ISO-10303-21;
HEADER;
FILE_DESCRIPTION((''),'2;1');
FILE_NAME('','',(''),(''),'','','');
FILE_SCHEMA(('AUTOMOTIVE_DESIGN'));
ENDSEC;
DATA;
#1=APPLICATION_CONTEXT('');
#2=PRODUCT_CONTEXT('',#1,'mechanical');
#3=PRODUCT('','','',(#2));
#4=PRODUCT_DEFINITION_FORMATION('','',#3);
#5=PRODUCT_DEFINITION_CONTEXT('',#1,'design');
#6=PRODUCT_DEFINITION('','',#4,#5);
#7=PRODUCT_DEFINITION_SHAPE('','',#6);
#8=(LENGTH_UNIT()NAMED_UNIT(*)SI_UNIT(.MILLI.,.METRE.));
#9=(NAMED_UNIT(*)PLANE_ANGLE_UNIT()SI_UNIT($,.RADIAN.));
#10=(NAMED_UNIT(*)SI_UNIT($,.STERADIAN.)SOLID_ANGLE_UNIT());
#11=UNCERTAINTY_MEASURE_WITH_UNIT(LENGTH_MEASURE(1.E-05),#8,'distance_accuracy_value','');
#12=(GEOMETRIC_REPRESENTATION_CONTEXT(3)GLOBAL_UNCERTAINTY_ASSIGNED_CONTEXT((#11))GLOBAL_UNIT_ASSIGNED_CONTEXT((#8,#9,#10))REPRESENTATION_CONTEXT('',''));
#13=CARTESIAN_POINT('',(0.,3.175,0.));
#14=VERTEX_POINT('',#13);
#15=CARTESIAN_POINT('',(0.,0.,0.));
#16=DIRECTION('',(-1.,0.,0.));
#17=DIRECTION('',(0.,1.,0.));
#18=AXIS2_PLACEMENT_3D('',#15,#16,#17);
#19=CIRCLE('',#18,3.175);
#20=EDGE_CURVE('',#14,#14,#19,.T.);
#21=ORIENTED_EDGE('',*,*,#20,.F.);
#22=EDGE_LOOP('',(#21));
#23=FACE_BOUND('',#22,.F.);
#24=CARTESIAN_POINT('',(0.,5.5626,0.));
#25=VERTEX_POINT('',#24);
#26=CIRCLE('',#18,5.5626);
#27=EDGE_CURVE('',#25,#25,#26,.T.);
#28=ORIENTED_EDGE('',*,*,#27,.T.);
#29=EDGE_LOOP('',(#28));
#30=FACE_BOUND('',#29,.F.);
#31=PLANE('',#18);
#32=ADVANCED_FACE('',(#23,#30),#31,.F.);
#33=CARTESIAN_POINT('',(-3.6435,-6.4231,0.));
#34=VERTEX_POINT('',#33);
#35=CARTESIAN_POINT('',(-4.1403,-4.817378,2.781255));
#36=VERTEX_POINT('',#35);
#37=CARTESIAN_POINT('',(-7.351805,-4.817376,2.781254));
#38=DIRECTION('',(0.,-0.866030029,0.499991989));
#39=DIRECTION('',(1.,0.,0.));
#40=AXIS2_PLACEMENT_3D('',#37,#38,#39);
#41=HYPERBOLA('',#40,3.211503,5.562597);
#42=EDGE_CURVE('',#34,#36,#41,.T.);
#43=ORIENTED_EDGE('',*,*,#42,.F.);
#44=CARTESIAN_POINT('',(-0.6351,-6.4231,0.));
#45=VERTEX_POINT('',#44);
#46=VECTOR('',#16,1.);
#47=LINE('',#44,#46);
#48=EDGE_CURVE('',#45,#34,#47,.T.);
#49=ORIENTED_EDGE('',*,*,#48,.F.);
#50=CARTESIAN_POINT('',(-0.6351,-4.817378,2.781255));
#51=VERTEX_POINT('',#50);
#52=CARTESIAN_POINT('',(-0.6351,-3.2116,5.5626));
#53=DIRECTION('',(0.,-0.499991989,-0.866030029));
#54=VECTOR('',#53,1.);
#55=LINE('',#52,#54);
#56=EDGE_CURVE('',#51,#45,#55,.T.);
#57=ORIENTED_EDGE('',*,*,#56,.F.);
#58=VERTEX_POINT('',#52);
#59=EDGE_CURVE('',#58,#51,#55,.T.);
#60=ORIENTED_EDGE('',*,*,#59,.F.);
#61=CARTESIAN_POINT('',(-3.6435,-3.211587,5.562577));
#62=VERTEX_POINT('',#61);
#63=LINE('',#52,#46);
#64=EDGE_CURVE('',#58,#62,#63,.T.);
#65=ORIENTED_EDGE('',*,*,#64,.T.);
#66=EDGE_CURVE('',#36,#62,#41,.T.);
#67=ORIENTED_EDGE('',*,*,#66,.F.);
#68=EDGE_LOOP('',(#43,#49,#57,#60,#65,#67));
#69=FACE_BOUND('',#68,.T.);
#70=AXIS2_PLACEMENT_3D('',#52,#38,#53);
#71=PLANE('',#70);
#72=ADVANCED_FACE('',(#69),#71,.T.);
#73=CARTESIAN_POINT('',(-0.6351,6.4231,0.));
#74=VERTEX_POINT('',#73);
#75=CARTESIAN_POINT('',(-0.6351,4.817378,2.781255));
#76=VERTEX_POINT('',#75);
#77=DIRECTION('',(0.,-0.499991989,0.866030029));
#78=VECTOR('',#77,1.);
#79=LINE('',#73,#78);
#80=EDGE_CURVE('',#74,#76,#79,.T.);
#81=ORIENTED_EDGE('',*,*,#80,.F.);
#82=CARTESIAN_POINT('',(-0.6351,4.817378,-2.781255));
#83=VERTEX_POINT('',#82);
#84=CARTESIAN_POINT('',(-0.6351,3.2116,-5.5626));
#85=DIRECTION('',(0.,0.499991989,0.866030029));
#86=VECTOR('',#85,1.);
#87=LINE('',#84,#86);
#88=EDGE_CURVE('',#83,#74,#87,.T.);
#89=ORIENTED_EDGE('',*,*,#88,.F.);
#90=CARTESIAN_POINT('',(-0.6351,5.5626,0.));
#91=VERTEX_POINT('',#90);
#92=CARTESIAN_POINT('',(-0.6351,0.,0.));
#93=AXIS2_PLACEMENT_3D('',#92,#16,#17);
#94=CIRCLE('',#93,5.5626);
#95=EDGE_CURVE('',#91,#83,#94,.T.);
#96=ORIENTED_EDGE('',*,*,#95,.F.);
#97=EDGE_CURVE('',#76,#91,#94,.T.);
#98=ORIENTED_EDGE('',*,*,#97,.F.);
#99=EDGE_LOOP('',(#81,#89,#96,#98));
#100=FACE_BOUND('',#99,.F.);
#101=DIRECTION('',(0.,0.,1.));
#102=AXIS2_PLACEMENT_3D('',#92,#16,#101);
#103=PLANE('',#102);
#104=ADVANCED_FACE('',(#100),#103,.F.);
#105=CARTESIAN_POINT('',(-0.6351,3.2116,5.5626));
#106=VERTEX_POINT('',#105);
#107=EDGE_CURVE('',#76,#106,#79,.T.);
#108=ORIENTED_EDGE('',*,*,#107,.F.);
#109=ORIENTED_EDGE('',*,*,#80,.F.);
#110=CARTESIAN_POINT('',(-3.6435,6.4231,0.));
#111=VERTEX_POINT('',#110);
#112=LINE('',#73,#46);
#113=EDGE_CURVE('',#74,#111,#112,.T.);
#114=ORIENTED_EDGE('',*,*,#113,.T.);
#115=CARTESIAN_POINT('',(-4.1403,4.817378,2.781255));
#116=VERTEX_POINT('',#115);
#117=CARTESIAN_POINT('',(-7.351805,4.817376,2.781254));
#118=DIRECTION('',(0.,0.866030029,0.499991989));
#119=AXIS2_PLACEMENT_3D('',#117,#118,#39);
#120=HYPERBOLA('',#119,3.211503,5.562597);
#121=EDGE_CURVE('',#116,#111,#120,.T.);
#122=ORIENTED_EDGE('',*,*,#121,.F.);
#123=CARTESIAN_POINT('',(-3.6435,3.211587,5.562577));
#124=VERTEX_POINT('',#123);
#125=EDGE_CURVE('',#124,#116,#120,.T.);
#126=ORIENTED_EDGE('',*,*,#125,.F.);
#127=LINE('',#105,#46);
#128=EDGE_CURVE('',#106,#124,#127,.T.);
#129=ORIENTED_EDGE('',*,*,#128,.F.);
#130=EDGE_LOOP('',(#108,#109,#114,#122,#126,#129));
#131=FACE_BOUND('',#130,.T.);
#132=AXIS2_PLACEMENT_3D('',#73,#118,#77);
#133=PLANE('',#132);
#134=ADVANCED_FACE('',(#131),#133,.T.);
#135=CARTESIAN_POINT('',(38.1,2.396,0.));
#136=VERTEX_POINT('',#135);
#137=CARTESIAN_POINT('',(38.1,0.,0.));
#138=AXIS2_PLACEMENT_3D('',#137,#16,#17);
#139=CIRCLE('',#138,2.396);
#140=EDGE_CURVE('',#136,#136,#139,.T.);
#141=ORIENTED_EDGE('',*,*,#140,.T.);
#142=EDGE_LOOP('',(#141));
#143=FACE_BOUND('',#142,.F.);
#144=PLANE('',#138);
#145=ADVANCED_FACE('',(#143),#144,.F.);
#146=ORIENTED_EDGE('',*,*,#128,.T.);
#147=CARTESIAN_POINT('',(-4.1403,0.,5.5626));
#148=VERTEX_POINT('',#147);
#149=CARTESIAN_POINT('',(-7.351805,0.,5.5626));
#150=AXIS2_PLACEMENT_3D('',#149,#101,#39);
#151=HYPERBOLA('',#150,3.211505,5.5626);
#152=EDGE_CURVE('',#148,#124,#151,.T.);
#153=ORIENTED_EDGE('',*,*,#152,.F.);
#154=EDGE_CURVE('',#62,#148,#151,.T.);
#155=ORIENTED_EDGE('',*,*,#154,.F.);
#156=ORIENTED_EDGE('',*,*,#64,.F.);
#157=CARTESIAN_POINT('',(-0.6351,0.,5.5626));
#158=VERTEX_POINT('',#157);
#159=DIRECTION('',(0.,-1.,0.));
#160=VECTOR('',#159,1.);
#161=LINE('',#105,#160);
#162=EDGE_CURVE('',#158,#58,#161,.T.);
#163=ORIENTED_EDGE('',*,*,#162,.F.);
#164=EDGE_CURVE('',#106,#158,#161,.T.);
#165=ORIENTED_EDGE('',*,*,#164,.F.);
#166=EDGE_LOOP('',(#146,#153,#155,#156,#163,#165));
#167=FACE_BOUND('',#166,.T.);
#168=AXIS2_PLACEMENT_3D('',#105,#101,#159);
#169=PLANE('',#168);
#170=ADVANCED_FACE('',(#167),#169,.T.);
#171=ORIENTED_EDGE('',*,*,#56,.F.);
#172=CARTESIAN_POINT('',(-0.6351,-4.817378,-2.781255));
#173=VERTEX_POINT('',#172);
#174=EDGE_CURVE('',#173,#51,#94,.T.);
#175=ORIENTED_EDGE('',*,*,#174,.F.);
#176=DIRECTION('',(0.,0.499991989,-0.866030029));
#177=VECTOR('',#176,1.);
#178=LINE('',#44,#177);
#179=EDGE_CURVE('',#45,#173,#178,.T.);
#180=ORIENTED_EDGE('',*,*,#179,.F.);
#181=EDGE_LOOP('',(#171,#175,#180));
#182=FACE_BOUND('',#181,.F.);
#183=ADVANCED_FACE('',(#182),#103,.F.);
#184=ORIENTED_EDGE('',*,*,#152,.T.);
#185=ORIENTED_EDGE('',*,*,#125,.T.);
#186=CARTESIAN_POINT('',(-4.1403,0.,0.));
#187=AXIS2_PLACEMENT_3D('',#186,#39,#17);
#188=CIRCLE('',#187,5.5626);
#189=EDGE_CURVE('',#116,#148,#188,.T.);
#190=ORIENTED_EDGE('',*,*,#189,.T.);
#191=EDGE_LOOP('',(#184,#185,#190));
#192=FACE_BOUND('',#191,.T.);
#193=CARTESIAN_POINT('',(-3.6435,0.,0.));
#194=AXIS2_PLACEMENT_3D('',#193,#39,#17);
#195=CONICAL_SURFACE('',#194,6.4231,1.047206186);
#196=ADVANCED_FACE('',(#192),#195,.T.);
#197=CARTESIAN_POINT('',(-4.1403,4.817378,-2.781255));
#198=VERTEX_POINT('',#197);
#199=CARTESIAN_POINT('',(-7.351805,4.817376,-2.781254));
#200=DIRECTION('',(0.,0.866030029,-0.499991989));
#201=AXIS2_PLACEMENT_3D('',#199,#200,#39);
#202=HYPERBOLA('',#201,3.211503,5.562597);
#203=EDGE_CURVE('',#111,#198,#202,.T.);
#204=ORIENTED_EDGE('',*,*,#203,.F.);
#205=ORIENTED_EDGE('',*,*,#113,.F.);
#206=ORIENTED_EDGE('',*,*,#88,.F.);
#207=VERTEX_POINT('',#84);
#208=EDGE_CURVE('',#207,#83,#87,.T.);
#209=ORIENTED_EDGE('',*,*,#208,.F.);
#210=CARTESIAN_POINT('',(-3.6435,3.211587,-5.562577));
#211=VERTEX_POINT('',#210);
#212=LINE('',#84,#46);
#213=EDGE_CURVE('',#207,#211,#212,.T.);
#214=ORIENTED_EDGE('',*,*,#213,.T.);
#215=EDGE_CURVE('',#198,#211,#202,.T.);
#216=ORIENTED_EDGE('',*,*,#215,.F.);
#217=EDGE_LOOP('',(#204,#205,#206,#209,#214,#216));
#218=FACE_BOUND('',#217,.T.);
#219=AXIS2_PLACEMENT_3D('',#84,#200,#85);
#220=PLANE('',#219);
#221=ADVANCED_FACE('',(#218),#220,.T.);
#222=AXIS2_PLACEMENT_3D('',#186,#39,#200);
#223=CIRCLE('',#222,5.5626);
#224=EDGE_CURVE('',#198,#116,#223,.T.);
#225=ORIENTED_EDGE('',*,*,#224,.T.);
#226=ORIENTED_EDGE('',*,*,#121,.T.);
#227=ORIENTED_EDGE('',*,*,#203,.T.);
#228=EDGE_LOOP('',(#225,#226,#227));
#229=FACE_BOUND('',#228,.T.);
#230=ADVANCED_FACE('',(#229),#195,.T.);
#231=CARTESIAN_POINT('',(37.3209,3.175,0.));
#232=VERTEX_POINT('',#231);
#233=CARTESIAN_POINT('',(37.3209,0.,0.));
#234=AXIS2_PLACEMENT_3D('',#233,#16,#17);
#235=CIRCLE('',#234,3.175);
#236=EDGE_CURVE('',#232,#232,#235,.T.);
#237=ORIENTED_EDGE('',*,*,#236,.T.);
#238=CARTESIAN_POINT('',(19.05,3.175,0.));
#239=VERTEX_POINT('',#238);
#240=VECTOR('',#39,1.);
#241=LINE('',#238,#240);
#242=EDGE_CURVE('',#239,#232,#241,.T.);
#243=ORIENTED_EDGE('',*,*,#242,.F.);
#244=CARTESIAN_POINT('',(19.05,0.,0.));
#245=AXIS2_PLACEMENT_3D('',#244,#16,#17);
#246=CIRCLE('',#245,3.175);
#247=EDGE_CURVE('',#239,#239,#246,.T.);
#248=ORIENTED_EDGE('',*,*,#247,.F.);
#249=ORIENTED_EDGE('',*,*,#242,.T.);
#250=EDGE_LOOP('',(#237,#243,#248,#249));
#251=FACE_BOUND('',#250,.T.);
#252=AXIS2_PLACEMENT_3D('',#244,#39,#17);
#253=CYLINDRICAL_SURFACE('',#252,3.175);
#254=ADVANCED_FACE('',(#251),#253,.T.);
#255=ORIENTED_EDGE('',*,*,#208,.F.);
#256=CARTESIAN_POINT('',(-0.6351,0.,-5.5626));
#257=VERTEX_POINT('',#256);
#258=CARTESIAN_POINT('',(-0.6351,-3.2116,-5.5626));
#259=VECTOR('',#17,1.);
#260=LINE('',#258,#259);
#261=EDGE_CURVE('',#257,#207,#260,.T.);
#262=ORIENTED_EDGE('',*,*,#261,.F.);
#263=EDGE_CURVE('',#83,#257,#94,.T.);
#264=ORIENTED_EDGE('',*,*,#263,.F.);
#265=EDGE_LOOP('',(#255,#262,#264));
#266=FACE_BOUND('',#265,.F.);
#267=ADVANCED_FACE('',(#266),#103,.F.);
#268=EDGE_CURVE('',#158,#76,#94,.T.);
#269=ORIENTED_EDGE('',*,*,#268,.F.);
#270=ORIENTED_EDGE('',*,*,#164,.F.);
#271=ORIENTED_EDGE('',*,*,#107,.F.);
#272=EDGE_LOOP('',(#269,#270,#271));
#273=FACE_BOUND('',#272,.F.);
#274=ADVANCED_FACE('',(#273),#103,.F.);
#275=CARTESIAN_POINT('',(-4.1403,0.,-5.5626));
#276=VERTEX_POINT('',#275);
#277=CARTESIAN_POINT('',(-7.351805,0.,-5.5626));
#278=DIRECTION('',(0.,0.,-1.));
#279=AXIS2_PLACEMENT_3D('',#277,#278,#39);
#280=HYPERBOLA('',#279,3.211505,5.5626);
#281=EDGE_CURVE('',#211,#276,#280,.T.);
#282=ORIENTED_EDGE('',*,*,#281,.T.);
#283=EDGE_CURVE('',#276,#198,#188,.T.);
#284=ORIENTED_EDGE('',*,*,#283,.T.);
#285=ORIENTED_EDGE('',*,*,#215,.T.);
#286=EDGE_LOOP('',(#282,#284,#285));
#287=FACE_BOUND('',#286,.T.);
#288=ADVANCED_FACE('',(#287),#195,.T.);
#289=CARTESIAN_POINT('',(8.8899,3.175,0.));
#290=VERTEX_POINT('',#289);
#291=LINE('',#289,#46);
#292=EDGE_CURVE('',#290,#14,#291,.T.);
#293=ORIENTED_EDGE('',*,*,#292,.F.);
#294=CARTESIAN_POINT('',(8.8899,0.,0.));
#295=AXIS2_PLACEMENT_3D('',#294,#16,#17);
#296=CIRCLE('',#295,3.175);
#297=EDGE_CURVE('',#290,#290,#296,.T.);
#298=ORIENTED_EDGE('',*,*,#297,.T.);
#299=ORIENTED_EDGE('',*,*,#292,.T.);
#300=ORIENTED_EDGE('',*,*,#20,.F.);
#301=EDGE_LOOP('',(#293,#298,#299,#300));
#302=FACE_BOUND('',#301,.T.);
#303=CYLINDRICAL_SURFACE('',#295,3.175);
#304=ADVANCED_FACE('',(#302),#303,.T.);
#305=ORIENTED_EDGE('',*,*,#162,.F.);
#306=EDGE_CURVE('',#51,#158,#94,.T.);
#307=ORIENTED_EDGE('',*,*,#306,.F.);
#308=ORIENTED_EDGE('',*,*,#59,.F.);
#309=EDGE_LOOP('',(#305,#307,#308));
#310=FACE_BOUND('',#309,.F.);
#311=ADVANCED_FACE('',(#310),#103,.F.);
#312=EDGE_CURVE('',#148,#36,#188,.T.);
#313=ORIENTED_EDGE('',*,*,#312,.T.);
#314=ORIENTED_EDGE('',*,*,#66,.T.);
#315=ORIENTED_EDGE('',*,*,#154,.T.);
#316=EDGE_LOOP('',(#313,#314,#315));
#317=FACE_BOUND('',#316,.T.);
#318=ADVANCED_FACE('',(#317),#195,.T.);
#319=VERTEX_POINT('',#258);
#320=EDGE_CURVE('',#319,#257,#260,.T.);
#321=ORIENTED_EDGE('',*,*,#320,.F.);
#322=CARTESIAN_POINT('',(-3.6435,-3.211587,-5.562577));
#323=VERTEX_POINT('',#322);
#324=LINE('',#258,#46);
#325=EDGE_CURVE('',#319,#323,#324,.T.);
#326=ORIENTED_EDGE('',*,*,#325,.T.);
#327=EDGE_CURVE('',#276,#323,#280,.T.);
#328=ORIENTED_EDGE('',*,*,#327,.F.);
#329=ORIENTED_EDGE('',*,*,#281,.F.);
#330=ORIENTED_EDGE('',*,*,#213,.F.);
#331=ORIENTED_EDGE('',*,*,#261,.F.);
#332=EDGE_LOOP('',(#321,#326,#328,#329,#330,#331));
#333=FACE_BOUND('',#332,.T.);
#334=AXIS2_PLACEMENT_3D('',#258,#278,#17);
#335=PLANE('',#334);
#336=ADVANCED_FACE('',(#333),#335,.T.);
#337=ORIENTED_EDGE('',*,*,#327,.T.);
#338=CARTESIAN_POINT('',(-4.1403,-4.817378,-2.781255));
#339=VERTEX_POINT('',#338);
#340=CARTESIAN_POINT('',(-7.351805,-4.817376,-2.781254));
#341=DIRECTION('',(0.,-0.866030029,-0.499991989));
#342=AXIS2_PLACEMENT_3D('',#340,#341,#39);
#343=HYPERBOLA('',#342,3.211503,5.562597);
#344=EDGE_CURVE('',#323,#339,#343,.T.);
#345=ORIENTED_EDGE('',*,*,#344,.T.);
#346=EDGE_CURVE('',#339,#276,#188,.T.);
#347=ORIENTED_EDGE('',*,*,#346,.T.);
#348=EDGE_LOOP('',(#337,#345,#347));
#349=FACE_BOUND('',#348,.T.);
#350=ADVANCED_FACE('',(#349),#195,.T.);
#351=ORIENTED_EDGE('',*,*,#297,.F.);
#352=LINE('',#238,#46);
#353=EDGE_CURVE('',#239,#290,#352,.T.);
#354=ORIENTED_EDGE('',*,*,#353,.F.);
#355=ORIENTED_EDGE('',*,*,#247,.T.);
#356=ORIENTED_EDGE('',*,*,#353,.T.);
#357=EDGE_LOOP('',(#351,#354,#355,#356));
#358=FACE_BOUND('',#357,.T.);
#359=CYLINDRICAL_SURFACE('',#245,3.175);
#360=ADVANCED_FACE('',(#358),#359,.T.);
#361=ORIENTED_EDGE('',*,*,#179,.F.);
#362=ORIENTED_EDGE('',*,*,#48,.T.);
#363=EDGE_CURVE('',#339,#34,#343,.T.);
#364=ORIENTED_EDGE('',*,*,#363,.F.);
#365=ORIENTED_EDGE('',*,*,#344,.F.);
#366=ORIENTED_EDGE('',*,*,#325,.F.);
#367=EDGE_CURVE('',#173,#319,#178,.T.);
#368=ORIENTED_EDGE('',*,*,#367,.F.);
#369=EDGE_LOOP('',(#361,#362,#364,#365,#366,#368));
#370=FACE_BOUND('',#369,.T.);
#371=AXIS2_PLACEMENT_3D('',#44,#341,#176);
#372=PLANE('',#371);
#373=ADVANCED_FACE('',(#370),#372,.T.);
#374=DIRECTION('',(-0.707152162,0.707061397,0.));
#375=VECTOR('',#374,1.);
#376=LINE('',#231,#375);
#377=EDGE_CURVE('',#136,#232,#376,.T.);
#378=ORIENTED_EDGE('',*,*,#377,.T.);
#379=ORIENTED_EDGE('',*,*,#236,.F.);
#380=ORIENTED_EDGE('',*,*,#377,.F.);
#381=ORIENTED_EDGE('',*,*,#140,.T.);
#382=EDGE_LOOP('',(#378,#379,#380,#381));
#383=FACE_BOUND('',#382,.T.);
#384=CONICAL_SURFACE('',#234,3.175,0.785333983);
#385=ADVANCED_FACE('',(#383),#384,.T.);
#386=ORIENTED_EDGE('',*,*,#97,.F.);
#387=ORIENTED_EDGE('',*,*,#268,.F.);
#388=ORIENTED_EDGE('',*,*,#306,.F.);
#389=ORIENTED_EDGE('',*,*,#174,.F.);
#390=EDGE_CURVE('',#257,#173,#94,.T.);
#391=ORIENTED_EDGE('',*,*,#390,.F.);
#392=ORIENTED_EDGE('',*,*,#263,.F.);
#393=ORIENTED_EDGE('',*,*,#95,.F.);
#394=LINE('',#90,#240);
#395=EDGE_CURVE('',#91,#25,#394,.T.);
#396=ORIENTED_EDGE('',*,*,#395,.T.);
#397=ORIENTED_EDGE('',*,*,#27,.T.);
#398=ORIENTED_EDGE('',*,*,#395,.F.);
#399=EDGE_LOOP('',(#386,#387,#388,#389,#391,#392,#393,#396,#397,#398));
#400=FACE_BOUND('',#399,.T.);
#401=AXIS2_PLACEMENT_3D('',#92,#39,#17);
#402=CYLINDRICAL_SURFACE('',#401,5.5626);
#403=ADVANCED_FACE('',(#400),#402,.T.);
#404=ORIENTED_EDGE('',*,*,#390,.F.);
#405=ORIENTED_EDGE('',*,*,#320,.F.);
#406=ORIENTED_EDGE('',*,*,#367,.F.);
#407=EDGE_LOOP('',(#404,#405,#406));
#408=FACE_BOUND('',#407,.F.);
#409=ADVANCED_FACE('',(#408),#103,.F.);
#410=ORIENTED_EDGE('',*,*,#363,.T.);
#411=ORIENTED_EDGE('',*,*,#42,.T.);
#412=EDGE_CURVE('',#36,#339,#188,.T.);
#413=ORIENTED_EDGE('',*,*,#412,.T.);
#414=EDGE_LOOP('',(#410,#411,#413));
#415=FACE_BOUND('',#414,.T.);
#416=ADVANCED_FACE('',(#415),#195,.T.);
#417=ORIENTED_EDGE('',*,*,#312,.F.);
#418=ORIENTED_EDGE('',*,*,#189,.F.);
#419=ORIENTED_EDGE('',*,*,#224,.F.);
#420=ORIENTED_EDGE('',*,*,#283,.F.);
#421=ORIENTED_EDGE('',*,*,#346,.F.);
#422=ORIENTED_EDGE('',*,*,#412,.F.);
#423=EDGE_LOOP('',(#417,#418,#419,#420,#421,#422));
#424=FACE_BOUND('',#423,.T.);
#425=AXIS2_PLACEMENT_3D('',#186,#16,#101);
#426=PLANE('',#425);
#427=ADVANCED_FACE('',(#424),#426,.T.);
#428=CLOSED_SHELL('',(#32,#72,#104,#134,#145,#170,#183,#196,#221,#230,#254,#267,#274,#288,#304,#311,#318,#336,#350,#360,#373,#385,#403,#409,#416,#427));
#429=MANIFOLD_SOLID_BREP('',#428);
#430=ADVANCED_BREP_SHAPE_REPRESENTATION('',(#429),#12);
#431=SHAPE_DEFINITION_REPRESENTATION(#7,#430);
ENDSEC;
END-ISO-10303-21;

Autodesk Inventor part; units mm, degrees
ref_plane "YZ Plane" through (0, 0, 0) normal (1, 0, 0) x (0, 1, 0)
ref_plane "XZ Plane" through (0, 0, 0) normal (0, 1, 0) x (-1, 0, 0)
sketch "Sketch1" plane through (0, 0, 0) normal (0, 0, 1) x (1, 0, 0)
  line L0 (0, 5.5626) -> (0, 3.175)
  line L1 (19.05, 3.175) -> (38.1, 3.175)
  line L2 (38.1, 3.175) -> (38.1, 0)
  line L3 (38.1, 0) -> (-0.6351, 0)
  line L4 (-8.3821, 0) -> (45.847, 0) projected
  line L5 (-0.6351, 0) -> (-0.6351, 5.5626)
  line L6 (-0.6351, 5.5626) -> (0, 5.5626)
  line L7 (19.05, 3.175) -> (8.8899, 3.175)
  line L8 (8.8899, 3.175) -> (0, 3.175)
  line L9 (0, -1.1125) -> (0, 6.6751) projected
  dimension "d0" = 38.1
  dimension "d1" = 19.05
  dimension "d2" = 6.35
  dimension "d9" = 0.6351
  dimension "d10" = 11.1252
  dimension "d13" = 10.1601
  dimension "d14" = 6.35
revolve "Body" add sketch "Sketch1" angle 360 about axis through (38.1, 0, 0) along (-1, 0, 0)
sketch "Sketch2" plane through (-0.6351, 0, 0) normal (-1, 0, 0) x (0, 0, 1)
  line L0 (0, 6.4231) -> (5.5626, 3.2116)
  line L1 (5.5626, 3.2116) -> (5.5626, -3.2116)
  line L2 (5.5626, -3.2116) -> (0, -6.4231)
  line L3 (0, -6.4231) -> (-5.5626, -3.2116)
  line L4 (-5.5626, -3.2116) -> (-5.5626, 3.2116)
  line L5 (-5.5626, 3.2116) -> (0, 6.4231)
  point P0 (0, 0)
  point P1 (0, 0)
  dimension "d11" = 11.1252
extrude "Head" add sketch "Sketch2" along normal blind 3.5052
sketch "Sketch4" plane through (0, 0, 0) normal (0, 0, 1) x (1, 0, 0)
  line L0 (-4.1403, 5.5626) -> (-4.1403, 6.4231)
  line L1 (-4.1403, 6.4231) -> (-3.6435, 6.4231)
  line L2 (-3.6435, 6.4231) -> (-4.1403, 5.5626)
  line L3 (-4.8413, 0) -> (0.0659, 0) projected
  line L4 (-0.6351, 6.4231) -> (-4.1403, 6.4231) projected
  line L5 (-4.1403, 3.2116) -> (-4.1403, 6.4231) projected
  dimension "d5" = 30
  dimension "d19" = 11.1252
revolve "Chamfer1" cut sketch "Sketch4" angle 360 about axis through (-10, 0, 0) along (1, 0, 0)
thread "Thread" size "1/4-20 UNC" class "2A" standard "ANSI Unified Screw Threads" length 19.05
chamfer "Chamfer2" distance 0.779 distance2 0.7791 1 edges at (38.1, -3.175, 0) measured on face at (38.1, -0.7017, 0.0433)
ref_plane "Work Plane1" through (1.525, 0, 0) normal (0, 0, 1) x (1, 0, 0)
equation "\"d0\" = NLG"
equation "\"d1\" = GEL"
equation "\"d2\" = GD"
equation "\"d10\" = SD2"
equation "\"d14\" = BDM"
equation "\"d11\" = SW"
equation "\"d3\" = KOH - SD"
equation "\"d5\" = ANG1"
equation "\"d19\" = SW0"
equation "\"d15\" = GEL"
equation "\"d6\" = -0.5 * SPD + 0.5 * GD"
equation "\"NLG\" = 38.1"
equation "\"GD\" = 6.35"
equation "\"BDM\" = 6.35"
equation "\"KOH\" = 4.1402"
equation "\"GEL\" = 19.05"
equation "\"SW\" = 11.1252"
equation "\"SW0\" = SW"
equation "\"SPD\" = GD1"
equation "\"SD2\" = SW"
equation "\"SD\" = 0.635"
equation "\"ANG1\" = 30deg"
equation "\"GAL\" = 10.16"
equation "\"GUL\" = 0.77902"
equation "\"RR\" = 0.381"
equation "\"WFT\" = SD"
equation "\"GD1\" = 4.79196"
equation "\"THREADDIA\" = 6.35"
equation "\"SDH\" = SW"
equation "\"SDHG\" = 8.89"
equation "\"TOA\" = 30deg"
equation "\"FAWI\" = 45deg"
equation "\"NND\" = 6.35"
equation "\"E0\" = 12.84961"
properties part number "AS 2465 - 1/4 x 1 1/2  UNC" material "Steel, Mild"
